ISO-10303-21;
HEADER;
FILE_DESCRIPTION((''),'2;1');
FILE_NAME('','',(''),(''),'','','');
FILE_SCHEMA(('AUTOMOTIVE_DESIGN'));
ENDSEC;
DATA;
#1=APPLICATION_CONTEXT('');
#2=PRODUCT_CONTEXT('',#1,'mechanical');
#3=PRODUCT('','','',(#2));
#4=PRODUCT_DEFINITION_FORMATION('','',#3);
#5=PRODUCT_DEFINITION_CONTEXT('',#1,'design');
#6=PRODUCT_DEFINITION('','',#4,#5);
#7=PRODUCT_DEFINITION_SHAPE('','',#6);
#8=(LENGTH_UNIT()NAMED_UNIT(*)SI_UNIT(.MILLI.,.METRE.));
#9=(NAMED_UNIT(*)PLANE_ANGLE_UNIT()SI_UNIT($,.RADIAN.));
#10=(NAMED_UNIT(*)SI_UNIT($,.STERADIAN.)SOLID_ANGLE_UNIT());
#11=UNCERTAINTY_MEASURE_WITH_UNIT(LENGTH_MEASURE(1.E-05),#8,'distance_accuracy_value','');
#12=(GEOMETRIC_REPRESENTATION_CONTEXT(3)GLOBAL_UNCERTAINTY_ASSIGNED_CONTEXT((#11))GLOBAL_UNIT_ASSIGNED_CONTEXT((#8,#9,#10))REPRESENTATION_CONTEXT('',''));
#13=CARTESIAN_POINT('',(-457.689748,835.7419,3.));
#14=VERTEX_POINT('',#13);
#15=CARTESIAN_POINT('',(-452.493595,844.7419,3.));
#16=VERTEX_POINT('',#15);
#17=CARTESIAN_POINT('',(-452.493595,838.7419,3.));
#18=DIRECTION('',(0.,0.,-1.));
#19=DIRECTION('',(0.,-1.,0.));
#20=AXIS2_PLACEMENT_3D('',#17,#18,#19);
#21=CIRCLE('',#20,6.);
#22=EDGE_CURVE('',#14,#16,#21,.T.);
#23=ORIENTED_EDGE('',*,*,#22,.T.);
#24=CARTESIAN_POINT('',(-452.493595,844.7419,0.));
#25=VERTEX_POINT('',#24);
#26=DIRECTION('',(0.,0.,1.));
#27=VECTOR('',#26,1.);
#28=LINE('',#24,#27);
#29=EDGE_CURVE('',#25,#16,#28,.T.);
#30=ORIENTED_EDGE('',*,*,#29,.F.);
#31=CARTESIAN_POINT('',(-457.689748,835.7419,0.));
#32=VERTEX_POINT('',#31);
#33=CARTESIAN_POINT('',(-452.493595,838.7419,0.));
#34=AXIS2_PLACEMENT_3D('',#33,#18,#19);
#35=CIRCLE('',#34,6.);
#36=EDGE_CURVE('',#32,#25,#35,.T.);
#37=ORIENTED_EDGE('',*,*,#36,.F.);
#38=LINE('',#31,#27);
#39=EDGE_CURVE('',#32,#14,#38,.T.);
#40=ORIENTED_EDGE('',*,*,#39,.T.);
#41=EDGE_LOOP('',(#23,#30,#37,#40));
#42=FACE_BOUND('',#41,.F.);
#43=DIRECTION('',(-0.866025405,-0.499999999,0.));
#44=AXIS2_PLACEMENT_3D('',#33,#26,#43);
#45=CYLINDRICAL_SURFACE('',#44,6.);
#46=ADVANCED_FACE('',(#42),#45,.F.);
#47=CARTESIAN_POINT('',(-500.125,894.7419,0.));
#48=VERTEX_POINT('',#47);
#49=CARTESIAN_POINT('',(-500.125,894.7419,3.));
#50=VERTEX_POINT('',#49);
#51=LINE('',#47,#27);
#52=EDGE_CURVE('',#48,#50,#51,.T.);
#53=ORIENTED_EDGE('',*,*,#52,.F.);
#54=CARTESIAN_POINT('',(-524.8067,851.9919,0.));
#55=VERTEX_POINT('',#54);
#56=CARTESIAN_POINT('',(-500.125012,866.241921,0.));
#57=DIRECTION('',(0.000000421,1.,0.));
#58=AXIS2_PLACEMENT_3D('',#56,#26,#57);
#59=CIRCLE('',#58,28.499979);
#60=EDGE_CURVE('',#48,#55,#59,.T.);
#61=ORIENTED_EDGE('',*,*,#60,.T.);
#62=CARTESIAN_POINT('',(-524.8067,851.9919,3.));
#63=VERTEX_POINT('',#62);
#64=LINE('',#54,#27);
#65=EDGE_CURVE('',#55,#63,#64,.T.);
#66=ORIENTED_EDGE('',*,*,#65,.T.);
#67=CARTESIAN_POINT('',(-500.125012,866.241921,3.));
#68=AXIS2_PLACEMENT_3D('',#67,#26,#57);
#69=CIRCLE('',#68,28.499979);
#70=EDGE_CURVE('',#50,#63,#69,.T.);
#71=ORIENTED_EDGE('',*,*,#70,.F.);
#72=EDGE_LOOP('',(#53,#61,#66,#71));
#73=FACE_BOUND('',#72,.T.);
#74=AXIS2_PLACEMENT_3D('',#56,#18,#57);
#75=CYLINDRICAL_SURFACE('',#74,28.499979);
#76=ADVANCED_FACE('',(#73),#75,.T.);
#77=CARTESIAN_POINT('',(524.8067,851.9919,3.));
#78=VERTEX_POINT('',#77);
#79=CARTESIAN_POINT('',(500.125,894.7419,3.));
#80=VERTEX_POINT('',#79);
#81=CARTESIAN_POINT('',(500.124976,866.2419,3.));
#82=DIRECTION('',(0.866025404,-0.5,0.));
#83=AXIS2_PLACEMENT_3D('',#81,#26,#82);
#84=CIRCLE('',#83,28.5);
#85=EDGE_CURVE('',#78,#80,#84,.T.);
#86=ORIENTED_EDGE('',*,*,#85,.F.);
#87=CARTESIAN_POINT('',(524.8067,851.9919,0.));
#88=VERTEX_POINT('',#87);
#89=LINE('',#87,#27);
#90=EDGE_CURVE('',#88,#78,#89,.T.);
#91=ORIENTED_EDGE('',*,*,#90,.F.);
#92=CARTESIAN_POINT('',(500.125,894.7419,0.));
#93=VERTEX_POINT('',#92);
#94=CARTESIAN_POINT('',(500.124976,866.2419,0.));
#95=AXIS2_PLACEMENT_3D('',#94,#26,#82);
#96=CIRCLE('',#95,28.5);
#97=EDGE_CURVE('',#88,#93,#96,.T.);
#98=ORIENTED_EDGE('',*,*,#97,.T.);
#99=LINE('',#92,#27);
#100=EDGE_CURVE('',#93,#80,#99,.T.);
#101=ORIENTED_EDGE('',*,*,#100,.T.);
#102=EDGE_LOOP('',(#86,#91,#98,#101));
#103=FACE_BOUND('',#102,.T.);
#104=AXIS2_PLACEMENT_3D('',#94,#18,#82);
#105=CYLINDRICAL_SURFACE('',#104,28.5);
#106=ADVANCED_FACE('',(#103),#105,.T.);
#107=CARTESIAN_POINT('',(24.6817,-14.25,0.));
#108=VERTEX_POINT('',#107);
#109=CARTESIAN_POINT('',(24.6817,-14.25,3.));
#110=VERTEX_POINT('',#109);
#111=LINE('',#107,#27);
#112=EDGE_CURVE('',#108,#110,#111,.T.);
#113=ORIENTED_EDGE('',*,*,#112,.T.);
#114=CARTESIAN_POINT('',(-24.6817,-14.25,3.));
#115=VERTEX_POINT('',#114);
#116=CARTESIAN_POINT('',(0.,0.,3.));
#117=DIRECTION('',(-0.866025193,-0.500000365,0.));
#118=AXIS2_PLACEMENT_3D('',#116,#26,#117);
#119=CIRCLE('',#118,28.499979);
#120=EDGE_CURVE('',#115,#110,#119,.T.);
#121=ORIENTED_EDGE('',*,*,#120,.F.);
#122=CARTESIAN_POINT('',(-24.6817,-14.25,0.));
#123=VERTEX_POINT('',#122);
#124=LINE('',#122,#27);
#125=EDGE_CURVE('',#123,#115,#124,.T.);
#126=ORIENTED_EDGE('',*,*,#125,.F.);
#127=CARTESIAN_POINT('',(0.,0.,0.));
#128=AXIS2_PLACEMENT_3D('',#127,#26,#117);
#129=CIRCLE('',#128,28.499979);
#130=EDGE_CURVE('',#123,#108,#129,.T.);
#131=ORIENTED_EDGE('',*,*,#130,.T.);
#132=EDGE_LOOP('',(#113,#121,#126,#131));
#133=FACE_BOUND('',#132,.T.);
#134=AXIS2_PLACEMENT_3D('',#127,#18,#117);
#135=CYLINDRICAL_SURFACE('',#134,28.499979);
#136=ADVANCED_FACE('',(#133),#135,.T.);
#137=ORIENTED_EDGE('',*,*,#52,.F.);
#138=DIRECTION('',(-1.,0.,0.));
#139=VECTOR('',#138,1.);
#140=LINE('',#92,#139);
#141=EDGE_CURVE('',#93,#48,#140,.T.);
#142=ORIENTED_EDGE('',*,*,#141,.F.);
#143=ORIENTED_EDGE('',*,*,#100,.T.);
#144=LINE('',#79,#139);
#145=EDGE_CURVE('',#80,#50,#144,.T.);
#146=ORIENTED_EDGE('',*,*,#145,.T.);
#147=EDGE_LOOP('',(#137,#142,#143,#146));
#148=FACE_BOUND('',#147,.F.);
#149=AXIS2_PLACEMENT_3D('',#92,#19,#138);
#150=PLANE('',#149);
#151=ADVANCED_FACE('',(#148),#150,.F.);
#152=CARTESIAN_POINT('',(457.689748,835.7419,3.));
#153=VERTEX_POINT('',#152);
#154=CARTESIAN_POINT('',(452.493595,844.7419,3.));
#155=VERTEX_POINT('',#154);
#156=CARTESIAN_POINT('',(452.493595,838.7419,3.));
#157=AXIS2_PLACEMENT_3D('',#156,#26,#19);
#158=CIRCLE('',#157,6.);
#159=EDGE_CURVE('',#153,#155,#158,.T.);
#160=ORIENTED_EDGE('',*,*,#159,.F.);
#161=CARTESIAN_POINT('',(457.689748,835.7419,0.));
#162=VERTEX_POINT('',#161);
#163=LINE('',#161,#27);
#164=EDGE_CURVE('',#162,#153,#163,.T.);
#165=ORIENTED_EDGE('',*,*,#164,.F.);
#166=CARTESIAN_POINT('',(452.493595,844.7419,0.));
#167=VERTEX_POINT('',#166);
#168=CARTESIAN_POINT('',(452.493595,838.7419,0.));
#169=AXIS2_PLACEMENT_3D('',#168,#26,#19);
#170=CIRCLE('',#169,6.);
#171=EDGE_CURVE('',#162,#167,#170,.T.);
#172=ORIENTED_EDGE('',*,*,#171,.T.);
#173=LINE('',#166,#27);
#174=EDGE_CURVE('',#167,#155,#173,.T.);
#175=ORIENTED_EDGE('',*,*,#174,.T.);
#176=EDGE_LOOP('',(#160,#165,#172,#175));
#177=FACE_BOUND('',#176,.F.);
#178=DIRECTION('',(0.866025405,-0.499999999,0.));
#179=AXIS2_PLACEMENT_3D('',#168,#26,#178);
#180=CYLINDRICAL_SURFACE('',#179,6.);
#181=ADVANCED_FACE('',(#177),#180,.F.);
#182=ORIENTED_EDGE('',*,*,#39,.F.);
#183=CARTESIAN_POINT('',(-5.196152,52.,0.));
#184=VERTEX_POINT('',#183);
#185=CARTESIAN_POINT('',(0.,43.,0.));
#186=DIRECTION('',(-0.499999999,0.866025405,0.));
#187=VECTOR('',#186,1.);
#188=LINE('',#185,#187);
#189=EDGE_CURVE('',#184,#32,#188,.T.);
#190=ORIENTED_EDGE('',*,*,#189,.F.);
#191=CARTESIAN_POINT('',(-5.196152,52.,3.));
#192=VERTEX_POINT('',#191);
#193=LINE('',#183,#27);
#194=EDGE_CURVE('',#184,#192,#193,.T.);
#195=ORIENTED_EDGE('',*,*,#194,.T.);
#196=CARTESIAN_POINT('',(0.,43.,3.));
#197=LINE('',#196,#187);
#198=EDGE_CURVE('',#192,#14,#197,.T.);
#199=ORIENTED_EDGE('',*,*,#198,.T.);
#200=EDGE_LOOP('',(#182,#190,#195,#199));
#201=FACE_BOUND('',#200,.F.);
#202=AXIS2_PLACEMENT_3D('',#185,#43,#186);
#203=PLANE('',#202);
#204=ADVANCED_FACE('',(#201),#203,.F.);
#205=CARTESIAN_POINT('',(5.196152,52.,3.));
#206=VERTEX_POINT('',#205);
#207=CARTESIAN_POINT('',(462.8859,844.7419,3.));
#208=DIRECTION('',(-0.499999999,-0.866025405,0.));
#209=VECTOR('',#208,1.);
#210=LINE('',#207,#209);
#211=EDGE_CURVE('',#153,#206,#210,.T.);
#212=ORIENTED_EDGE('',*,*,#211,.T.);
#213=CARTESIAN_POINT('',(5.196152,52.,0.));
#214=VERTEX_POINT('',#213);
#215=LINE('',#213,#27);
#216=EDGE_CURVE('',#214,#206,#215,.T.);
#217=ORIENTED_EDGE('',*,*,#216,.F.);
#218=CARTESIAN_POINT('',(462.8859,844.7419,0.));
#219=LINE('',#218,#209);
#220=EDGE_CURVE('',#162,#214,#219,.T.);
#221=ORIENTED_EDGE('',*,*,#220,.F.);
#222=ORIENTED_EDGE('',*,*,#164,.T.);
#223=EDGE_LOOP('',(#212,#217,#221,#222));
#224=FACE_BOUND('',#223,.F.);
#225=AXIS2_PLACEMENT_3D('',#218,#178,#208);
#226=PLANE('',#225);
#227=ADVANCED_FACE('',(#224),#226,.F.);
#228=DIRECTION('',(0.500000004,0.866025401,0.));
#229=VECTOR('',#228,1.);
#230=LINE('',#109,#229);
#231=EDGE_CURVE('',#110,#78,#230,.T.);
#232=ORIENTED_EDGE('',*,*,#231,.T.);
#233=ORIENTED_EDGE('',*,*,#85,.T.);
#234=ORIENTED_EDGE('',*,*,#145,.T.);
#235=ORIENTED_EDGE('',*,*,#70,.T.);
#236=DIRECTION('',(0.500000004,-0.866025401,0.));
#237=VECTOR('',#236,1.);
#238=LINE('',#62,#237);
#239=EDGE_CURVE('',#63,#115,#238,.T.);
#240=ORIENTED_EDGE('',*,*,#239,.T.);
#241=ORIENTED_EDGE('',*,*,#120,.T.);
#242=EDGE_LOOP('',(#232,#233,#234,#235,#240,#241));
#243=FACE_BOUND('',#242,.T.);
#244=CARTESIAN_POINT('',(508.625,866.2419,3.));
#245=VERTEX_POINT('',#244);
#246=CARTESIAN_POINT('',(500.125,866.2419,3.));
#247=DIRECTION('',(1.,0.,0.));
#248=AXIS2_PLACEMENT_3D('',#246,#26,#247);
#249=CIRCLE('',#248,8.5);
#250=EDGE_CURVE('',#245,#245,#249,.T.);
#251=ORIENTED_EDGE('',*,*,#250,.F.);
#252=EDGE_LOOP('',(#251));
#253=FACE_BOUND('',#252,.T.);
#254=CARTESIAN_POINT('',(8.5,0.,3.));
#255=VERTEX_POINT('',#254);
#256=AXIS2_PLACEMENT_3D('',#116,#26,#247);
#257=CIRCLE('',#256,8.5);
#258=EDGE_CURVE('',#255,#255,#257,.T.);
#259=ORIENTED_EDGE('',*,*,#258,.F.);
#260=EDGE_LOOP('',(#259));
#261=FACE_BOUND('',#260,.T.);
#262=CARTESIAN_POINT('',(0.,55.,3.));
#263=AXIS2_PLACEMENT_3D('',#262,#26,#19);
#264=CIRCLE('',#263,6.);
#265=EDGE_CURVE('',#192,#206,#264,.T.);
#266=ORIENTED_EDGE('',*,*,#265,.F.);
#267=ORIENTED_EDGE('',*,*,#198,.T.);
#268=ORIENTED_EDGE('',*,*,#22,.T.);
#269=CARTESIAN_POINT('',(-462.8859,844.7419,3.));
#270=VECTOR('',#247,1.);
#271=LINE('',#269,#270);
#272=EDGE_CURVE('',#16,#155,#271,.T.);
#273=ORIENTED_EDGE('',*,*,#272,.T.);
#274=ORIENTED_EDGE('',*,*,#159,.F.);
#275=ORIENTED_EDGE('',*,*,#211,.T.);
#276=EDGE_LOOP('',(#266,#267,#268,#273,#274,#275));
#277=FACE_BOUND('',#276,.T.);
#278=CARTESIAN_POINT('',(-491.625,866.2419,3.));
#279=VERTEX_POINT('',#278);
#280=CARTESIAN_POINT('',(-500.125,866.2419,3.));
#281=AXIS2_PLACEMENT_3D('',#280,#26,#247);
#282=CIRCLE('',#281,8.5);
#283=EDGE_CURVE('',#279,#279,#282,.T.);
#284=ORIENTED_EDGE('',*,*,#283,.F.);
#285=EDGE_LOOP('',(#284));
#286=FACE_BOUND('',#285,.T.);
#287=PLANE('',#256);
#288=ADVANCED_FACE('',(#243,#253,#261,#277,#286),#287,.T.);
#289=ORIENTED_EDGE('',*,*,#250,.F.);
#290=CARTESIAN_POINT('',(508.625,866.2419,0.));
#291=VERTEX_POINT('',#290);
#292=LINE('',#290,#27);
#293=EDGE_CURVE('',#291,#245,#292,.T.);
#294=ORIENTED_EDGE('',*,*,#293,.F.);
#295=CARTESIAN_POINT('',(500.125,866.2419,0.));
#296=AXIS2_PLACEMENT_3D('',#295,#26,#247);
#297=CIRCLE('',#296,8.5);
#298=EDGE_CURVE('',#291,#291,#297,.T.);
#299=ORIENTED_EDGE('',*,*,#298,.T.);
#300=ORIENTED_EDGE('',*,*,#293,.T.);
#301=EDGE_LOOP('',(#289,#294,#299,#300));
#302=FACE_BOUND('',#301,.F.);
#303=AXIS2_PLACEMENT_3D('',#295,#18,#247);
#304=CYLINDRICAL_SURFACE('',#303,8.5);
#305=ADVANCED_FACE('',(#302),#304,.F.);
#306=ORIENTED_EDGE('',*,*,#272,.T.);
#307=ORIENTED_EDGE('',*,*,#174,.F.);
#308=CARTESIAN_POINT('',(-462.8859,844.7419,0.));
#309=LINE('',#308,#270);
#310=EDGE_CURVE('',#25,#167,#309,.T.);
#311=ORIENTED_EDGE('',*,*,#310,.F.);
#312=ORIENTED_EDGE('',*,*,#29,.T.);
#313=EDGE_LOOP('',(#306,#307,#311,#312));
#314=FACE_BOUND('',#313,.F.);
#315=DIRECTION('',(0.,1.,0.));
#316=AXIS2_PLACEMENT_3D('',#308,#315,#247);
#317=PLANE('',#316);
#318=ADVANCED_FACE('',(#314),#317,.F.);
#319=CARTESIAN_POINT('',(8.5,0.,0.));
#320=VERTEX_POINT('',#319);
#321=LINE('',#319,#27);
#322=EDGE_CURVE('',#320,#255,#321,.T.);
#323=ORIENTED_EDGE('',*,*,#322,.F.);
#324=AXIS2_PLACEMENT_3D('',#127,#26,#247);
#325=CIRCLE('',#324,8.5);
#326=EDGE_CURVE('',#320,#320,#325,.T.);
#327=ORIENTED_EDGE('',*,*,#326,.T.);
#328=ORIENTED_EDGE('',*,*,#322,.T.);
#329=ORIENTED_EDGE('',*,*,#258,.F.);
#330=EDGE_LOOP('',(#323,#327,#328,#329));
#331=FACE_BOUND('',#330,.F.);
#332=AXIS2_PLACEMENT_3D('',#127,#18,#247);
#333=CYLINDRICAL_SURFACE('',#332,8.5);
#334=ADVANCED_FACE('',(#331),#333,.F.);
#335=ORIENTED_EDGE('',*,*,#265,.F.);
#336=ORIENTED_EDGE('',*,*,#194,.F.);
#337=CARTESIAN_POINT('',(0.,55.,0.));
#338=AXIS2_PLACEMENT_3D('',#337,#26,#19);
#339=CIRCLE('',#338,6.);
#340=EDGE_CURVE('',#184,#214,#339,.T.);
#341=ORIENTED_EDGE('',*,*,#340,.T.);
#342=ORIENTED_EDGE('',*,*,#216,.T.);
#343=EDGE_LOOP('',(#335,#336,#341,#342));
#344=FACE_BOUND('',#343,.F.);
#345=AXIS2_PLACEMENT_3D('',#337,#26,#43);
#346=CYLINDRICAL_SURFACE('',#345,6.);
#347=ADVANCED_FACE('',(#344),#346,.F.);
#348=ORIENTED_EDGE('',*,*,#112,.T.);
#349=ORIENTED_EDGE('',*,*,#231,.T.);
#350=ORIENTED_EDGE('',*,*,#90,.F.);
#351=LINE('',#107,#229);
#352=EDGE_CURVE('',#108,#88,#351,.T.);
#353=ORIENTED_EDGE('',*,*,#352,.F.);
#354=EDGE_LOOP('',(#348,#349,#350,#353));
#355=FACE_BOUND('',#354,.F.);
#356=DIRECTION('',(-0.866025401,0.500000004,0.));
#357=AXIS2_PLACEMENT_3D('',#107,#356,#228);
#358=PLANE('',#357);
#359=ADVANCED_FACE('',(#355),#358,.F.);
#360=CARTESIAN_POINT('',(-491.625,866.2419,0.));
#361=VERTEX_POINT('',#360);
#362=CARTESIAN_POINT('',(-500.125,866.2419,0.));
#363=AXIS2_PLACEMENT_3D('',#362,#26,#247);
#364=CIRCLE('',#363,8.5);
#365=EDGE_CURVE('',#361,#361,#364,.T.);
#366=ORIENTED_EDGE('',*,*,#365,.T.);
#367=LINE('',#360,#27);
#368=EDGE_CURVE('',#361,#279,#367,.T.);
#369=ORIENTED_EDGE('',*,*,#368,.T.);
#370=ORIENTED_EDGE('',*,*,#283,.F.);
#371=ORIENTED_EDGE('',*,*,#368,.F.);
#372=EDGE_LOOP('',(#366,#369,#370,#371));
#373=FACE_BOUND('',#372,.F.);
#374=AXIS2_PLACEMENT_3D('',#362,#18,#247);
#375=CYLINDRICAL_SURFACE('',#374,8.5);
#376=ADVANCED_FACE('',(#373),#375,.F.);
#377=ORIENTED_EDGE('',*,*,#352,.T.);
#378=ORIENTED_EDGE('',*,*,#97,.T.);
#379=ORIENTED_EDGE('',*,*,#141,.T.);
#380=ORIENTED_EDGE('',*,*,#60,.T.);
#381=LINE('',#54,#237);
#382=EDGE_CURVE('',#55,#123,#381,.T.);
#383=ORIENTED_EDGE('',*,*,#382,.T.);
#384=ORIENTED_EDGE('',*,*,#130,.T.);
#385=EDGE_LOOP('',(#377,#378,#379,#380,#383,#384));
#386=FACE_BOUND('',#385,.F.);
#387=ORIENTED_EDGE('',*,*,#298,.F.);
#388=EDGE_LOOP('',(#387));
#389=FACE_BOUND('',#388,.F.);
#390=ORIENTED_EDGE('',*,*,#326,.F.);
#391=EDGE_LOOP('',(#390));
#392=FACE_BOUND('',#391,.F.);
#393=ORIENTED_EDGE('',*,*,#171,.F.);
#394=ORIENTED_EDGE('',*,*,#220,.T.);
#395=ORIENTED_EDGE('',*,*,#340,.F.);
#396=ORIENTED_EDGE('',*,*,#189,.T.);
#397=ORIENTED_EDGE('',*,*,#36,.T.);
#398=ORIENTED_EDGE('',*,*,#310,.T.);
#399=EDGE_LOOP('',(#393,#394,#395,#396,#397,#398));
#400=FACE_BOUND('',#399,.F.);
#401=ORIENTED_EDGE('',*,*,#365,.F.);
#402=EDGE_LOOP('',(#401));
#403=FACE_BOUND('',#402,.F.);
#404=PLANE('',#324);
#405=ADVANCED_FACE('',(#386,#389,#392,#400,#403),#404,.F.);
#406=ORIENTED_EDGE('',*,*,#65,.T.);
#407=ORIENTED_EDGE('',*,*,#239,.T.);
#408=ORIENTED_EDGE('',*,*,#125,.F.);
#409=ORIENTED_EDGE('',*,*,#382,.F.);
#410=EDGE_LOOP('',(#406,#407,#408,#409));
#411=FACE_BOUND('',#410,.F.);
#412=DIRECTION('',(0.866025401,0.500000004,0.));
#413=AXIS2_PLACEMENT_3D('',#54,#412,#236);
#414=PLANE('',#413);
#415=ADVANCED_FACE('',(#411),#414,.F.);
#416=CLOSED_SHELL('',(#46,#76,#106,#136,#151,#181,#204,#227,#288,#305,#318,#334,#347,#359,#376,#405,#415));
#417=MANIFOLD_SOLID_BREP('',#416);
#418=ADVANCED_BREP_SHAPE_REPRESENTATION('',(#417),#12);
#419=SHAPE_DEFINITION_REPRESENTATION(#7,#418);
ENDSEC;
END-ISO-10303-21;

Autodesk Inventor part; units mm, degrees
ref_plane "YZ Plane" through (0, 0, 0) normal (1, 0, 0) x (0, 1, 0)
ref_plane "XZ Plane" through (0, 0, 0) normal (0, 1, 0) x (-1, 0, 0)
ref_plane "XY Plane" through (0, 0, 0) normal (0, 0, 1) x (1, 0, 0)
sketch "Sketch1" plane through (0, 0, 0) normal (0, 0, 1) x (1, 0, 0)
  circle A0 centre (0, 0) radius 8.5
  line L0 (-524.8067, 851.9919) -> (-24.6817, -14.25)
  arc A1 (-24.6817, -14.25) -> (24.6817, -14.25) centre (0, 0) ccw
  line L1 (24.6817, -14.25) -> (524.8067, 851.9919)
  arc A2 (524.8067, 851.9919) -> (500.125, 894.7419) centre (500.125, 866.2419) ccw
  line L2 (500.125, 894.7419) -> (-500.125, 894.7419)
  arc A3 (-500.125, 894.7419) -> (-524.8067, 851.9919) centre (-500.125, 866.2419) ccw
  line L3 (0, 0) -> (0, 894.7419) construction
  line L4 (-462.8859, 844.7419) -> (462.8859, 844.7419)
  line L5 (462.8859, 844.7419) -> (0, 43)
  line L6 (0, 43) -> (-462.8859, 844.7419)
  circle A4 centre (-500.125, 866.2419) radius 8.5
  circle A5 centre (500.125, 866.2419) radius 8.5
  dimension "d34" = 17
  dimension "d35" = 20
  dimension "d36" = 1000.25
  dimension "d37" = 1000.25
  dimension "d38" = 50
  dimension "d39" = 17
  dimension "d40" = 17
extrude "Plate1" add sketch "Sketch1" along normal blind 3
fillet "Corner Round3" radius 6 3 edges at (-462.8859, 844.7419, 1.5) (0, 43, 1.5) (462.8859, 844.7419, 1.5)
equation "\"d37\" = d36"
equation "\"d2\" = Thickness"
equation "\"BendReliefWidth\" = Thickness"
equation "\"BendReliefDepth\" = 0.5 * Thickness"
equation "\"CornerReliefSize\" = 4 * Thickness"
equation "\"MinimumRemnant\" = 2 * Thickness"
equation "\"TransitionRadius\" = BendRadius"
equation "\"JacobiRadiusSize\" = BendRadius"
equation "\"GapSize\" = Thickness"
equation "\"Thickness\" = 3"
equation "\"BendRadius\" = 5"
properties part number "APN 1489 leg 1400 pattern" material "Stainless Steel"
